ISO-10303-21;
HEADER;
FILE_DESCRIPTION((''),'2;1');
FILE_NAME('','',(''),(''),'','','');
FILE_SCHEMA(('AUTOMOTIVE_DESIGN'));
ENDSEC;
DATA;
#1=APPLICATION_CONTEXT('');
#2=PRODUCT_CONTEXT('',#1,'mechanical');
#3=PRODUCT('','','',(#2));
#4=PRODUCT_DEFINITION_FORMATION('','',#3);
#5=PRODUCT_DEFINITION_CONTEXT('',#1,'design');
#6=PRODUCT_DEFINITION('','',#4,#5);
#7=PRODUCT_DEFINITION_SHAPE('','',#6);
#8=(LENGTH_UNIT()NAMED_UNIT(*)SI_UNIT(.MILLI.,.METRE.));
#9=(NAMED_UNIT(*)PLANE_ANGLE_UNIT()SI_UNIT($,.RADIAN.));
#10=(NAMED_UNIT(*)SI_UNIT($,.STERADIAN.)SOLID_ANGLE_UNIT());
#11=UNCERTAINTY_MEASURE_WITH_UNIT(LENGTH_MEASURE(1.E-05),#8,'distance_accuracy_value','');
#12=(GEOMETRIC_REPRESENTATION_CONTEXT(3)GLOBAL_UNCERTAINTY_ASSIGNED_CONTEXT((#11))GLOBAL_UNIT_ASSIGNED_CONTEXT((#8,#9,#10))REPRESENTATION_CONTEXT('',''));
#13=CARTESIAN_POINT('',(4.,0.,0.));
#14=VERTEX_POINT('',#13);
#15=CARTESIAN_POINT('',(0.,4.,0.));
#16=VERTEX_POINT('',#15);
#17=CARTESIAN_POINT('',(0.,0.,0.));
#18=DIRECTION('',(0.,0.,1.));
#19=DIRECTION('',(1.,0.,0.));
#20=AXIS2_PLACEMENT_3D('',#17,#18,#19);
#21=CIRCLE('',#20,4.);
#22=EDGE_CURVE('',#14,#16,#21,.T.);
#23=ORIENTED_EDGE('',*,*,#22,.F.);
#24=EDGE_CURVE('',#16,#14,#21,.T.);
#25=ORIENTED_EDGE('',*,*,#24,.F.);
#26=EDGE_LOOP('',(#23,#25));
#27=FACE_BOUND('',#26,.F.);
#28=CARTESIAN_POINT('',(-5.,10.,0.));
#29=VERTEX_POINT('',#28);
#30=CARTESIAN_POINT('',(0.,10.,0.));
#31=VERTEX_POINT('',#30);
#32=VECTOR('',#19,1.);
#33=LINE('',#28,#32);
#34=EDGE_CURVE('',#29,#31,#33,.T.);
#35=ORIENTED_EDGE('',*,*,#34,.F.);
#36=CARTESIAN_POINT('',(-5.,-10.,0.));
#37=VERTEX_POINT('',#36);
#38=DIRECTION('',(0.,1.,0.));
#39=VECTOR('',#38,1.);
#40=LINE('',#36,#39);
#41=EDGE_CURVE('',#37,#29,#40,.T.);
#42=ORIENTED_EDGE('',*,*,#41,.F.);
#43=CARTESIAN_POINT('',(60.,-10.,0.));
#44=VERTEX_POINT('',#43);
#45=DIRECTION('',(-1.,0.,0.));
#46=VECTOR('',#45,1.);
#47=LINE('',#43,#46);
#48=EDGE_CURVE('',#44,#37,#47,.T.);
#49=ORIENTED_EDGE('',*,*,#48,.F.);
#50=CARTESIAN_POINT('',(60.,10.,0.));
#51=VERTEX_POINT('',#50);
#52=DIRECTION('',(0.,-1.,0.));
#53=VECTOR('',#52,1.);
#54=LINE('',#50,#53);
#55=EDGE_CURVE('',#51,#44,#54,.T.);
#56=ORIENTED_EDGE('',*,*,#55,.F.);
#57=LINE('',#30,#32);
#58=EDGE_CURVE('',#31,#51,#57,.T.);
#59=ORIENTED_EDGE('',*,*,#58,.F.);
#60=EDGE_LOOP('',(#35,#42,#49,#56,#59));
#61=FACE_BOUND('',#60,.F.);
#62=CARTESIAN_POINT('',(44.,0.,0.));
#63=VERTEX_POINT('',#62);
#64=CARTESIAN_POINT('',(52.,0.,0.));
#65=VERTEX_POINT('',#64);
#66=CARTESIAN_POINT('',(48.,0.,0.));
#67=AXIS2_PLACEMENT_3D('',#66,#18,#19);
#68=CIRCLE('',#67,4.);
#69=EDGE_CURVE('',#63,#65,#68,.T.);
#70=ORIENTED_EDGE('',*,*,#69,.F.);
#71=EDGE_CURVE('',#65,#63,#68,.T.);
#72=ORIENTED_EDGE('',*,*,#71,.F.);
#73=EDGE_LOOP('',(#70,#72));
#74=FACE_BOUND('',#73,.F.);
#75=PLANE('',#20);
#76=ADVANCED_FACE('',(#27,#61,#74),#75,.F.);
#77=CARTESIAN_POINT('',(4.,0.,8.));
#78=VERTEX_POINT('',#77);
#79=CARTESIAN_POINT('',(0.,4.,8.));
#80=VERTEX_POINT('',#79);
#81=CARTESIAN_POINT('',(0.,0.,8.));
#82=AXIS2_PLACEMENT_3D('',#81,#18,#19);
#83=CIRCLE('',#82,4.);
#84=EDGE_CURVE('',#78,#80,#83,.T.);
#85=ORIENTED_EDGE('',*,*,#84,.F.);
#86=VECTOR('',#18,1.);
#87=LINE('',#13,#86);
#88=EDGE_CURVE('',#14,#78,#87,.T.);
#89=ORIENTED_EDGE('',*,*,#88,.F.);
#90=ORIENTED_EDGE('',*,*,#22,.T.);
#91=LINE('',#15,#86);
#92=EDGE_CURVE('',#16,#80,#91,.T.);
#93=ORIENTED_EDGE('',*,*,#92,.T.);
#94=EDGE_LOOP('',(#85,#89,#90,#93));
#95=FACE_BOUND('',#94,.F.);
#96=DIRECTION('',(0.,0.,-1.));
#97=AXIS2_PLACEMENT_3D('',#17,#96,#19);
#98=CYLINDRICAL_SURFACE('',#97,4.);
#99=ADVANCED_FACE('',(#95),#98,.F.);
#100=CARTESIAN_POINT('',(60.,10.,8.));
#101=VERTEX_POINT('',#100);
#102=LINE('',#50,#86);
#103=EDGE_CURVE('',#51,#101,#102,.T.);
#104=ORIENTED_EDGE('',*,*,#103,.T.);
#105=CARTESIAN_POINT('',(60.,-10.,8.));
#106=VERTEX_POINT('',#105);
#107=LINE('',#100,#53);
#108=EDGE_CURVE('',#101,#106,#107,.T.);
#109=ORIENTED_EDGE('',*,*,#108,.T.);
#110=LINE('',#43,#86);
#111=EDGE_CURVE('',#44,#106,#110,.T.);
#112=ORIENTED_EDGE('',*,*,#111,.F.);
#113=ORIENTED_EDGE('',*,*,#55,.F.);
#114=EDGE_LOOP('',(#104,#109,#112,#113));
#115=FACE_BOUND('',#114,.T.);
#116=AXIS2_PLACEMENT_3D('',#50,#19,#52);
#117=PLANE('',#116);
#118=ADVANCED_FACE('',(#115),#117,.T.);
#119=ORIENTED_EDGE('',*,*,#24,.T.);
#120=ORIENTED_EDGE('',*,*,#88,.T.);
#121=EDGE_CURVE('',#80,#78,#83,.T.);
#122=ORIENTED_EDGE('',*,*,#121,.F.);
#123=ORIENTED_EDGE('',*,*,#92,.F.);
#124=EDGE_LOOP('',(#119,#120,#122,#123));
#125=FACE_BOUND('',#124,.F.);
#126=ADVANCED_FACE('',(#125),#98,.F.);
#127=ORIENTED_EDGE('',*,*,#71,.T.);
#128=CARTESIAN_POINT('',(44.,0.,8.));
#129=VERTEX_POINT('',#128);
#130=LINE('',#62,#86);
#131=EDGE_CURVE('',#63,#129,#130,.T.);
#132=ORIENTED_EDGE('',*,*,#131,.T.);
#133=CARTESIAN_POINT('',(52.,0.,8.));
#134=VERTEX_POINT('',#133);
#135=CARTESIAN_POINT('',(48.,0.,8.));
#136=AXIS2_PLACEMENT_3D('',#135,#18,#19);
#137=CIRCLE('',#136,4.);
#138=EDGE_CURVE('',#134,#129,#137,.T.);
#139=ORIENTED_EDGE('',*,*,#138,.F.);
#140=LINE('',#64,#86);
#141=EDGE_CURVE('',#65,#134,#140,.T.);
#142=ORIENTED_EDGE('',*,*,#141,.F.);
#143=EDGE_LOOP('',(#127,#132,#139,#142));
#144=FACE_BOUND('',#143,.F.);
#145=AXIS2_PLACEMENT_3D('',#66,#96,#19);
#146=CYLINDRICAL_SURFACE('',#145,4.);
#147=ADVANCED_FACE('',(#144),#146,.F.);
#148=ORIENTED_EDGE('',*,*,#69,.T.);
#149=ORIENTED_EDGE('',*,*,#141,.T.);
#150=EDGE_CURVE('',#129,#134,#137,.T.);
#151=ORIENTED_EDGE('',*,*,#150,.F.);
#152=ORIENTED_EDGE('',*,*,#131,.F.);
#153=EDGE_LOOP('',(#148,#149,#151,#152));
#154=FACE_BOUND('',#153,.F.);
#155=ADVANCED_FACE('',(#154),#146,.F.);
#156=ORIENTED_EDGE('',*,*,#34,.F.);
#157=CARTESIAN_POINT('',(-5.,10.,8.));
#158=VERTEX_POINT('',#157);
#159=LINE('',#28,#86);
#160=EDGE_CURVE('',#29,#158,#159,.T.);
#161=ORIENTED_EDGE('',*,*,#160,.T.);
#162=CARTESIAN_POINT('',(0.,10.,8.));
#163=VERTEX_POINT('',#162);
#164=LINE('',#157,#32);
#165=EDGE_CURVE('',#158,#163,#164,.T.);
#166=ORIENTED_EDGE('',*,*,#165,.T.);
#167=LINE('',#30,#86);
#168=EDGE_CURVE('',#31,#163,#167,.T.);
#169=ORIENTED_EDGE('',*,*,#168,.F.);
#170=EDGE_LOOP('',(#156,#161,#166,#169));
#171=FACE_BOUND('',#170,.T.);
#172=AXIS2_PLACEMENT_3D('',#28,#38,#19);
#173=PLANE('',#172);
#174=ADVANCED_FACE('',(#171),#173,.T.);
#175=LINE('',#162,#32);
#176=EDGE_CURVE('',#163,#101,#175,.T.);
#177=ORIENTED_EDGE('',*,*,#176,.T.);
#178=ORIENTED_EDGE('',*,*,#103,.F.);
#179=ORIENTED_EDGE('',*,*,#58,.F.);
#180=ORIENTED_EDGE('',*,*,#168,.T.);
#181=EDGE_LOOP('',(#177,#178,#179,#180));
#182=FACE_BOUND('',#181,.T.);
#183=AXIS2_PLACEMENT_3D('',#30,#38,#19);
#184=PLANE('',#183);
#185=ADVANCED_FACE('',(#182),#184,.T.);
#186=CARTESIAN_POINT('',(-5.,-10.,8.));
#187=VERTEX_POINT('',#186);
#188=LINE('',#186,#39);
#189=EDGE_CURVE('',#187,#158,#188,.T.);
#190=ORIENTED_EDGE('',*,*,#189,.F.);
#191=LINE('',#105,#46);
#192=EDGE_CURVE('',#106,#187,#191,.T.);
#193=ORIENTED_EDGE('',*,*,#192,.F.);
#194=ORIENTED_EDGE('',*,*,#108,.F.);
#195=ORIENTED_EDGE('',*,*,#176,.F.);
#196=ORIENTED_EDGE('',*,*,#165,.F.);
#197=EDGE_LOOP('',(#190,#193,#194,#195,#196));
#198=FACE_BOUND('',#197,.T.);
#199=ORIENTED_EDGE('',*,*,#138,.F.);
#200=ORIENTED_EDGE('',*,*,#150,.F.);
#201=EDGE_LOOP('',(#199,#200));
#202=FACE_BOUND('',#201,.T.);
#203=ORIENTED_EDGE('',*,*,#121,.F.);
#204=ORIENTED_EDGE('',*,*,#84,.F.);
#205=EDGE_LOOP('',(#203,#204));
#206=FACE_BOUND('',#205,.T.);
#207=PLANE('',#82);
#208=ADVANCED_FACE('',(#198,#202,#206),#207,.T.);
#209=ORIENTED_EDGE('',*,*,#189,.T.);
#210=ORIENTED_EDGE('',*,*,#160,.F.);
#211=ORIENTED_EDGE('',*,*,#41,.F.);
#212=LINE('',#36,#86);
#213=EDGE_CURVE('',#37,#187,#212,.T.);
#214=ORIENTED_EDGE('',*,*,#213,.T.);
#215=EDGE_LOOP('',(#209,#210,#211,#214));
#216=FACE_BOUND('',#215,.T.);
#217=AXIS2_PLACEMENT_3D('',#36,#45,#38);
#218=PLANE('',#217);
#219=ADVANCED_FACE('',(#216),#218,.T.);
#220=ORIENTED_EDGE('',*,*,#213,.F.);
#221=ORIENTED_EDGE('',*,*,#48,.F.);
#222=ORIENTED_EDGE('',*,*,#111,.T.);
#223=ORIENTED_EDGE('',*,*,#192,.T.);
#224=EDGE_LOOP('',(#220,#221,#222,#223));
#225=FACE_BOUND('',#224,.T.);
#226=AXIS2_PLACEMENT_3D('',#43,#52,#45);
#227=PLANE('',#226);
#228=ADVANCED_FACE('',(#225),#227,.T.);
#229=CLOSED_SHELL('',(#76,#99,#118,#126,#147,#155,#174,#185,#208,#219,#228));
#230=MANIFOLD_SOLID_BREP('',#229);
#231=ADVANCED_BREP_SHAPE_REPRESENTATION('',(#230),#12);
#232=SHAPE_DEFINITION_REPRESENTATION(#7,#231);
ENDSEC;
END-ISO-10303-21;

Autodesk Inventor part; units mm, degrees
ref_plane "YZ Plane" through (0, 0, 0) normal (1, 0, 0) x (0, 1, 0)
ref_plane "XZ Plane" through (0, 0, 0) normal (0, 1, 0) x (-1, 0, 0)
ref_plane "XY Plane" through (0, 0, 0) normal (0, 0, 1) x (1, 0, 0)
sketch "Sketch1" plane through (0, 0, 0) normal (0, 0, 1) x (1, 0, 0)
  circle A0 centre (0, 0) radius 4
  line L0 (0, 0) -> (48, 0)
  circle A1 centre (48, 0) radius 4
  line L1 (0, 0) -> (0, 10)
  line L2 (0, 10) -> (60, 10)
  line L3 (60, 10) -> (60, -10)
  line L4 (60, -10) -> (-5, -10)
  line L5 (-5, -10) -> (-5, 10)
  line L6 (-5, 10) -> (0, 10)
  dimension "d0" = 8
  dimension "d1" = 48
  dimension "d2" = 8
  dimension "d3" = 10
  dimension "d4" = 60
  dimension "d5" = 20
  dimension "d6" = 65
extrude "Extrusion1" add sketch "Sketch1" along normal blind 8
properties part number "plaque 2"
